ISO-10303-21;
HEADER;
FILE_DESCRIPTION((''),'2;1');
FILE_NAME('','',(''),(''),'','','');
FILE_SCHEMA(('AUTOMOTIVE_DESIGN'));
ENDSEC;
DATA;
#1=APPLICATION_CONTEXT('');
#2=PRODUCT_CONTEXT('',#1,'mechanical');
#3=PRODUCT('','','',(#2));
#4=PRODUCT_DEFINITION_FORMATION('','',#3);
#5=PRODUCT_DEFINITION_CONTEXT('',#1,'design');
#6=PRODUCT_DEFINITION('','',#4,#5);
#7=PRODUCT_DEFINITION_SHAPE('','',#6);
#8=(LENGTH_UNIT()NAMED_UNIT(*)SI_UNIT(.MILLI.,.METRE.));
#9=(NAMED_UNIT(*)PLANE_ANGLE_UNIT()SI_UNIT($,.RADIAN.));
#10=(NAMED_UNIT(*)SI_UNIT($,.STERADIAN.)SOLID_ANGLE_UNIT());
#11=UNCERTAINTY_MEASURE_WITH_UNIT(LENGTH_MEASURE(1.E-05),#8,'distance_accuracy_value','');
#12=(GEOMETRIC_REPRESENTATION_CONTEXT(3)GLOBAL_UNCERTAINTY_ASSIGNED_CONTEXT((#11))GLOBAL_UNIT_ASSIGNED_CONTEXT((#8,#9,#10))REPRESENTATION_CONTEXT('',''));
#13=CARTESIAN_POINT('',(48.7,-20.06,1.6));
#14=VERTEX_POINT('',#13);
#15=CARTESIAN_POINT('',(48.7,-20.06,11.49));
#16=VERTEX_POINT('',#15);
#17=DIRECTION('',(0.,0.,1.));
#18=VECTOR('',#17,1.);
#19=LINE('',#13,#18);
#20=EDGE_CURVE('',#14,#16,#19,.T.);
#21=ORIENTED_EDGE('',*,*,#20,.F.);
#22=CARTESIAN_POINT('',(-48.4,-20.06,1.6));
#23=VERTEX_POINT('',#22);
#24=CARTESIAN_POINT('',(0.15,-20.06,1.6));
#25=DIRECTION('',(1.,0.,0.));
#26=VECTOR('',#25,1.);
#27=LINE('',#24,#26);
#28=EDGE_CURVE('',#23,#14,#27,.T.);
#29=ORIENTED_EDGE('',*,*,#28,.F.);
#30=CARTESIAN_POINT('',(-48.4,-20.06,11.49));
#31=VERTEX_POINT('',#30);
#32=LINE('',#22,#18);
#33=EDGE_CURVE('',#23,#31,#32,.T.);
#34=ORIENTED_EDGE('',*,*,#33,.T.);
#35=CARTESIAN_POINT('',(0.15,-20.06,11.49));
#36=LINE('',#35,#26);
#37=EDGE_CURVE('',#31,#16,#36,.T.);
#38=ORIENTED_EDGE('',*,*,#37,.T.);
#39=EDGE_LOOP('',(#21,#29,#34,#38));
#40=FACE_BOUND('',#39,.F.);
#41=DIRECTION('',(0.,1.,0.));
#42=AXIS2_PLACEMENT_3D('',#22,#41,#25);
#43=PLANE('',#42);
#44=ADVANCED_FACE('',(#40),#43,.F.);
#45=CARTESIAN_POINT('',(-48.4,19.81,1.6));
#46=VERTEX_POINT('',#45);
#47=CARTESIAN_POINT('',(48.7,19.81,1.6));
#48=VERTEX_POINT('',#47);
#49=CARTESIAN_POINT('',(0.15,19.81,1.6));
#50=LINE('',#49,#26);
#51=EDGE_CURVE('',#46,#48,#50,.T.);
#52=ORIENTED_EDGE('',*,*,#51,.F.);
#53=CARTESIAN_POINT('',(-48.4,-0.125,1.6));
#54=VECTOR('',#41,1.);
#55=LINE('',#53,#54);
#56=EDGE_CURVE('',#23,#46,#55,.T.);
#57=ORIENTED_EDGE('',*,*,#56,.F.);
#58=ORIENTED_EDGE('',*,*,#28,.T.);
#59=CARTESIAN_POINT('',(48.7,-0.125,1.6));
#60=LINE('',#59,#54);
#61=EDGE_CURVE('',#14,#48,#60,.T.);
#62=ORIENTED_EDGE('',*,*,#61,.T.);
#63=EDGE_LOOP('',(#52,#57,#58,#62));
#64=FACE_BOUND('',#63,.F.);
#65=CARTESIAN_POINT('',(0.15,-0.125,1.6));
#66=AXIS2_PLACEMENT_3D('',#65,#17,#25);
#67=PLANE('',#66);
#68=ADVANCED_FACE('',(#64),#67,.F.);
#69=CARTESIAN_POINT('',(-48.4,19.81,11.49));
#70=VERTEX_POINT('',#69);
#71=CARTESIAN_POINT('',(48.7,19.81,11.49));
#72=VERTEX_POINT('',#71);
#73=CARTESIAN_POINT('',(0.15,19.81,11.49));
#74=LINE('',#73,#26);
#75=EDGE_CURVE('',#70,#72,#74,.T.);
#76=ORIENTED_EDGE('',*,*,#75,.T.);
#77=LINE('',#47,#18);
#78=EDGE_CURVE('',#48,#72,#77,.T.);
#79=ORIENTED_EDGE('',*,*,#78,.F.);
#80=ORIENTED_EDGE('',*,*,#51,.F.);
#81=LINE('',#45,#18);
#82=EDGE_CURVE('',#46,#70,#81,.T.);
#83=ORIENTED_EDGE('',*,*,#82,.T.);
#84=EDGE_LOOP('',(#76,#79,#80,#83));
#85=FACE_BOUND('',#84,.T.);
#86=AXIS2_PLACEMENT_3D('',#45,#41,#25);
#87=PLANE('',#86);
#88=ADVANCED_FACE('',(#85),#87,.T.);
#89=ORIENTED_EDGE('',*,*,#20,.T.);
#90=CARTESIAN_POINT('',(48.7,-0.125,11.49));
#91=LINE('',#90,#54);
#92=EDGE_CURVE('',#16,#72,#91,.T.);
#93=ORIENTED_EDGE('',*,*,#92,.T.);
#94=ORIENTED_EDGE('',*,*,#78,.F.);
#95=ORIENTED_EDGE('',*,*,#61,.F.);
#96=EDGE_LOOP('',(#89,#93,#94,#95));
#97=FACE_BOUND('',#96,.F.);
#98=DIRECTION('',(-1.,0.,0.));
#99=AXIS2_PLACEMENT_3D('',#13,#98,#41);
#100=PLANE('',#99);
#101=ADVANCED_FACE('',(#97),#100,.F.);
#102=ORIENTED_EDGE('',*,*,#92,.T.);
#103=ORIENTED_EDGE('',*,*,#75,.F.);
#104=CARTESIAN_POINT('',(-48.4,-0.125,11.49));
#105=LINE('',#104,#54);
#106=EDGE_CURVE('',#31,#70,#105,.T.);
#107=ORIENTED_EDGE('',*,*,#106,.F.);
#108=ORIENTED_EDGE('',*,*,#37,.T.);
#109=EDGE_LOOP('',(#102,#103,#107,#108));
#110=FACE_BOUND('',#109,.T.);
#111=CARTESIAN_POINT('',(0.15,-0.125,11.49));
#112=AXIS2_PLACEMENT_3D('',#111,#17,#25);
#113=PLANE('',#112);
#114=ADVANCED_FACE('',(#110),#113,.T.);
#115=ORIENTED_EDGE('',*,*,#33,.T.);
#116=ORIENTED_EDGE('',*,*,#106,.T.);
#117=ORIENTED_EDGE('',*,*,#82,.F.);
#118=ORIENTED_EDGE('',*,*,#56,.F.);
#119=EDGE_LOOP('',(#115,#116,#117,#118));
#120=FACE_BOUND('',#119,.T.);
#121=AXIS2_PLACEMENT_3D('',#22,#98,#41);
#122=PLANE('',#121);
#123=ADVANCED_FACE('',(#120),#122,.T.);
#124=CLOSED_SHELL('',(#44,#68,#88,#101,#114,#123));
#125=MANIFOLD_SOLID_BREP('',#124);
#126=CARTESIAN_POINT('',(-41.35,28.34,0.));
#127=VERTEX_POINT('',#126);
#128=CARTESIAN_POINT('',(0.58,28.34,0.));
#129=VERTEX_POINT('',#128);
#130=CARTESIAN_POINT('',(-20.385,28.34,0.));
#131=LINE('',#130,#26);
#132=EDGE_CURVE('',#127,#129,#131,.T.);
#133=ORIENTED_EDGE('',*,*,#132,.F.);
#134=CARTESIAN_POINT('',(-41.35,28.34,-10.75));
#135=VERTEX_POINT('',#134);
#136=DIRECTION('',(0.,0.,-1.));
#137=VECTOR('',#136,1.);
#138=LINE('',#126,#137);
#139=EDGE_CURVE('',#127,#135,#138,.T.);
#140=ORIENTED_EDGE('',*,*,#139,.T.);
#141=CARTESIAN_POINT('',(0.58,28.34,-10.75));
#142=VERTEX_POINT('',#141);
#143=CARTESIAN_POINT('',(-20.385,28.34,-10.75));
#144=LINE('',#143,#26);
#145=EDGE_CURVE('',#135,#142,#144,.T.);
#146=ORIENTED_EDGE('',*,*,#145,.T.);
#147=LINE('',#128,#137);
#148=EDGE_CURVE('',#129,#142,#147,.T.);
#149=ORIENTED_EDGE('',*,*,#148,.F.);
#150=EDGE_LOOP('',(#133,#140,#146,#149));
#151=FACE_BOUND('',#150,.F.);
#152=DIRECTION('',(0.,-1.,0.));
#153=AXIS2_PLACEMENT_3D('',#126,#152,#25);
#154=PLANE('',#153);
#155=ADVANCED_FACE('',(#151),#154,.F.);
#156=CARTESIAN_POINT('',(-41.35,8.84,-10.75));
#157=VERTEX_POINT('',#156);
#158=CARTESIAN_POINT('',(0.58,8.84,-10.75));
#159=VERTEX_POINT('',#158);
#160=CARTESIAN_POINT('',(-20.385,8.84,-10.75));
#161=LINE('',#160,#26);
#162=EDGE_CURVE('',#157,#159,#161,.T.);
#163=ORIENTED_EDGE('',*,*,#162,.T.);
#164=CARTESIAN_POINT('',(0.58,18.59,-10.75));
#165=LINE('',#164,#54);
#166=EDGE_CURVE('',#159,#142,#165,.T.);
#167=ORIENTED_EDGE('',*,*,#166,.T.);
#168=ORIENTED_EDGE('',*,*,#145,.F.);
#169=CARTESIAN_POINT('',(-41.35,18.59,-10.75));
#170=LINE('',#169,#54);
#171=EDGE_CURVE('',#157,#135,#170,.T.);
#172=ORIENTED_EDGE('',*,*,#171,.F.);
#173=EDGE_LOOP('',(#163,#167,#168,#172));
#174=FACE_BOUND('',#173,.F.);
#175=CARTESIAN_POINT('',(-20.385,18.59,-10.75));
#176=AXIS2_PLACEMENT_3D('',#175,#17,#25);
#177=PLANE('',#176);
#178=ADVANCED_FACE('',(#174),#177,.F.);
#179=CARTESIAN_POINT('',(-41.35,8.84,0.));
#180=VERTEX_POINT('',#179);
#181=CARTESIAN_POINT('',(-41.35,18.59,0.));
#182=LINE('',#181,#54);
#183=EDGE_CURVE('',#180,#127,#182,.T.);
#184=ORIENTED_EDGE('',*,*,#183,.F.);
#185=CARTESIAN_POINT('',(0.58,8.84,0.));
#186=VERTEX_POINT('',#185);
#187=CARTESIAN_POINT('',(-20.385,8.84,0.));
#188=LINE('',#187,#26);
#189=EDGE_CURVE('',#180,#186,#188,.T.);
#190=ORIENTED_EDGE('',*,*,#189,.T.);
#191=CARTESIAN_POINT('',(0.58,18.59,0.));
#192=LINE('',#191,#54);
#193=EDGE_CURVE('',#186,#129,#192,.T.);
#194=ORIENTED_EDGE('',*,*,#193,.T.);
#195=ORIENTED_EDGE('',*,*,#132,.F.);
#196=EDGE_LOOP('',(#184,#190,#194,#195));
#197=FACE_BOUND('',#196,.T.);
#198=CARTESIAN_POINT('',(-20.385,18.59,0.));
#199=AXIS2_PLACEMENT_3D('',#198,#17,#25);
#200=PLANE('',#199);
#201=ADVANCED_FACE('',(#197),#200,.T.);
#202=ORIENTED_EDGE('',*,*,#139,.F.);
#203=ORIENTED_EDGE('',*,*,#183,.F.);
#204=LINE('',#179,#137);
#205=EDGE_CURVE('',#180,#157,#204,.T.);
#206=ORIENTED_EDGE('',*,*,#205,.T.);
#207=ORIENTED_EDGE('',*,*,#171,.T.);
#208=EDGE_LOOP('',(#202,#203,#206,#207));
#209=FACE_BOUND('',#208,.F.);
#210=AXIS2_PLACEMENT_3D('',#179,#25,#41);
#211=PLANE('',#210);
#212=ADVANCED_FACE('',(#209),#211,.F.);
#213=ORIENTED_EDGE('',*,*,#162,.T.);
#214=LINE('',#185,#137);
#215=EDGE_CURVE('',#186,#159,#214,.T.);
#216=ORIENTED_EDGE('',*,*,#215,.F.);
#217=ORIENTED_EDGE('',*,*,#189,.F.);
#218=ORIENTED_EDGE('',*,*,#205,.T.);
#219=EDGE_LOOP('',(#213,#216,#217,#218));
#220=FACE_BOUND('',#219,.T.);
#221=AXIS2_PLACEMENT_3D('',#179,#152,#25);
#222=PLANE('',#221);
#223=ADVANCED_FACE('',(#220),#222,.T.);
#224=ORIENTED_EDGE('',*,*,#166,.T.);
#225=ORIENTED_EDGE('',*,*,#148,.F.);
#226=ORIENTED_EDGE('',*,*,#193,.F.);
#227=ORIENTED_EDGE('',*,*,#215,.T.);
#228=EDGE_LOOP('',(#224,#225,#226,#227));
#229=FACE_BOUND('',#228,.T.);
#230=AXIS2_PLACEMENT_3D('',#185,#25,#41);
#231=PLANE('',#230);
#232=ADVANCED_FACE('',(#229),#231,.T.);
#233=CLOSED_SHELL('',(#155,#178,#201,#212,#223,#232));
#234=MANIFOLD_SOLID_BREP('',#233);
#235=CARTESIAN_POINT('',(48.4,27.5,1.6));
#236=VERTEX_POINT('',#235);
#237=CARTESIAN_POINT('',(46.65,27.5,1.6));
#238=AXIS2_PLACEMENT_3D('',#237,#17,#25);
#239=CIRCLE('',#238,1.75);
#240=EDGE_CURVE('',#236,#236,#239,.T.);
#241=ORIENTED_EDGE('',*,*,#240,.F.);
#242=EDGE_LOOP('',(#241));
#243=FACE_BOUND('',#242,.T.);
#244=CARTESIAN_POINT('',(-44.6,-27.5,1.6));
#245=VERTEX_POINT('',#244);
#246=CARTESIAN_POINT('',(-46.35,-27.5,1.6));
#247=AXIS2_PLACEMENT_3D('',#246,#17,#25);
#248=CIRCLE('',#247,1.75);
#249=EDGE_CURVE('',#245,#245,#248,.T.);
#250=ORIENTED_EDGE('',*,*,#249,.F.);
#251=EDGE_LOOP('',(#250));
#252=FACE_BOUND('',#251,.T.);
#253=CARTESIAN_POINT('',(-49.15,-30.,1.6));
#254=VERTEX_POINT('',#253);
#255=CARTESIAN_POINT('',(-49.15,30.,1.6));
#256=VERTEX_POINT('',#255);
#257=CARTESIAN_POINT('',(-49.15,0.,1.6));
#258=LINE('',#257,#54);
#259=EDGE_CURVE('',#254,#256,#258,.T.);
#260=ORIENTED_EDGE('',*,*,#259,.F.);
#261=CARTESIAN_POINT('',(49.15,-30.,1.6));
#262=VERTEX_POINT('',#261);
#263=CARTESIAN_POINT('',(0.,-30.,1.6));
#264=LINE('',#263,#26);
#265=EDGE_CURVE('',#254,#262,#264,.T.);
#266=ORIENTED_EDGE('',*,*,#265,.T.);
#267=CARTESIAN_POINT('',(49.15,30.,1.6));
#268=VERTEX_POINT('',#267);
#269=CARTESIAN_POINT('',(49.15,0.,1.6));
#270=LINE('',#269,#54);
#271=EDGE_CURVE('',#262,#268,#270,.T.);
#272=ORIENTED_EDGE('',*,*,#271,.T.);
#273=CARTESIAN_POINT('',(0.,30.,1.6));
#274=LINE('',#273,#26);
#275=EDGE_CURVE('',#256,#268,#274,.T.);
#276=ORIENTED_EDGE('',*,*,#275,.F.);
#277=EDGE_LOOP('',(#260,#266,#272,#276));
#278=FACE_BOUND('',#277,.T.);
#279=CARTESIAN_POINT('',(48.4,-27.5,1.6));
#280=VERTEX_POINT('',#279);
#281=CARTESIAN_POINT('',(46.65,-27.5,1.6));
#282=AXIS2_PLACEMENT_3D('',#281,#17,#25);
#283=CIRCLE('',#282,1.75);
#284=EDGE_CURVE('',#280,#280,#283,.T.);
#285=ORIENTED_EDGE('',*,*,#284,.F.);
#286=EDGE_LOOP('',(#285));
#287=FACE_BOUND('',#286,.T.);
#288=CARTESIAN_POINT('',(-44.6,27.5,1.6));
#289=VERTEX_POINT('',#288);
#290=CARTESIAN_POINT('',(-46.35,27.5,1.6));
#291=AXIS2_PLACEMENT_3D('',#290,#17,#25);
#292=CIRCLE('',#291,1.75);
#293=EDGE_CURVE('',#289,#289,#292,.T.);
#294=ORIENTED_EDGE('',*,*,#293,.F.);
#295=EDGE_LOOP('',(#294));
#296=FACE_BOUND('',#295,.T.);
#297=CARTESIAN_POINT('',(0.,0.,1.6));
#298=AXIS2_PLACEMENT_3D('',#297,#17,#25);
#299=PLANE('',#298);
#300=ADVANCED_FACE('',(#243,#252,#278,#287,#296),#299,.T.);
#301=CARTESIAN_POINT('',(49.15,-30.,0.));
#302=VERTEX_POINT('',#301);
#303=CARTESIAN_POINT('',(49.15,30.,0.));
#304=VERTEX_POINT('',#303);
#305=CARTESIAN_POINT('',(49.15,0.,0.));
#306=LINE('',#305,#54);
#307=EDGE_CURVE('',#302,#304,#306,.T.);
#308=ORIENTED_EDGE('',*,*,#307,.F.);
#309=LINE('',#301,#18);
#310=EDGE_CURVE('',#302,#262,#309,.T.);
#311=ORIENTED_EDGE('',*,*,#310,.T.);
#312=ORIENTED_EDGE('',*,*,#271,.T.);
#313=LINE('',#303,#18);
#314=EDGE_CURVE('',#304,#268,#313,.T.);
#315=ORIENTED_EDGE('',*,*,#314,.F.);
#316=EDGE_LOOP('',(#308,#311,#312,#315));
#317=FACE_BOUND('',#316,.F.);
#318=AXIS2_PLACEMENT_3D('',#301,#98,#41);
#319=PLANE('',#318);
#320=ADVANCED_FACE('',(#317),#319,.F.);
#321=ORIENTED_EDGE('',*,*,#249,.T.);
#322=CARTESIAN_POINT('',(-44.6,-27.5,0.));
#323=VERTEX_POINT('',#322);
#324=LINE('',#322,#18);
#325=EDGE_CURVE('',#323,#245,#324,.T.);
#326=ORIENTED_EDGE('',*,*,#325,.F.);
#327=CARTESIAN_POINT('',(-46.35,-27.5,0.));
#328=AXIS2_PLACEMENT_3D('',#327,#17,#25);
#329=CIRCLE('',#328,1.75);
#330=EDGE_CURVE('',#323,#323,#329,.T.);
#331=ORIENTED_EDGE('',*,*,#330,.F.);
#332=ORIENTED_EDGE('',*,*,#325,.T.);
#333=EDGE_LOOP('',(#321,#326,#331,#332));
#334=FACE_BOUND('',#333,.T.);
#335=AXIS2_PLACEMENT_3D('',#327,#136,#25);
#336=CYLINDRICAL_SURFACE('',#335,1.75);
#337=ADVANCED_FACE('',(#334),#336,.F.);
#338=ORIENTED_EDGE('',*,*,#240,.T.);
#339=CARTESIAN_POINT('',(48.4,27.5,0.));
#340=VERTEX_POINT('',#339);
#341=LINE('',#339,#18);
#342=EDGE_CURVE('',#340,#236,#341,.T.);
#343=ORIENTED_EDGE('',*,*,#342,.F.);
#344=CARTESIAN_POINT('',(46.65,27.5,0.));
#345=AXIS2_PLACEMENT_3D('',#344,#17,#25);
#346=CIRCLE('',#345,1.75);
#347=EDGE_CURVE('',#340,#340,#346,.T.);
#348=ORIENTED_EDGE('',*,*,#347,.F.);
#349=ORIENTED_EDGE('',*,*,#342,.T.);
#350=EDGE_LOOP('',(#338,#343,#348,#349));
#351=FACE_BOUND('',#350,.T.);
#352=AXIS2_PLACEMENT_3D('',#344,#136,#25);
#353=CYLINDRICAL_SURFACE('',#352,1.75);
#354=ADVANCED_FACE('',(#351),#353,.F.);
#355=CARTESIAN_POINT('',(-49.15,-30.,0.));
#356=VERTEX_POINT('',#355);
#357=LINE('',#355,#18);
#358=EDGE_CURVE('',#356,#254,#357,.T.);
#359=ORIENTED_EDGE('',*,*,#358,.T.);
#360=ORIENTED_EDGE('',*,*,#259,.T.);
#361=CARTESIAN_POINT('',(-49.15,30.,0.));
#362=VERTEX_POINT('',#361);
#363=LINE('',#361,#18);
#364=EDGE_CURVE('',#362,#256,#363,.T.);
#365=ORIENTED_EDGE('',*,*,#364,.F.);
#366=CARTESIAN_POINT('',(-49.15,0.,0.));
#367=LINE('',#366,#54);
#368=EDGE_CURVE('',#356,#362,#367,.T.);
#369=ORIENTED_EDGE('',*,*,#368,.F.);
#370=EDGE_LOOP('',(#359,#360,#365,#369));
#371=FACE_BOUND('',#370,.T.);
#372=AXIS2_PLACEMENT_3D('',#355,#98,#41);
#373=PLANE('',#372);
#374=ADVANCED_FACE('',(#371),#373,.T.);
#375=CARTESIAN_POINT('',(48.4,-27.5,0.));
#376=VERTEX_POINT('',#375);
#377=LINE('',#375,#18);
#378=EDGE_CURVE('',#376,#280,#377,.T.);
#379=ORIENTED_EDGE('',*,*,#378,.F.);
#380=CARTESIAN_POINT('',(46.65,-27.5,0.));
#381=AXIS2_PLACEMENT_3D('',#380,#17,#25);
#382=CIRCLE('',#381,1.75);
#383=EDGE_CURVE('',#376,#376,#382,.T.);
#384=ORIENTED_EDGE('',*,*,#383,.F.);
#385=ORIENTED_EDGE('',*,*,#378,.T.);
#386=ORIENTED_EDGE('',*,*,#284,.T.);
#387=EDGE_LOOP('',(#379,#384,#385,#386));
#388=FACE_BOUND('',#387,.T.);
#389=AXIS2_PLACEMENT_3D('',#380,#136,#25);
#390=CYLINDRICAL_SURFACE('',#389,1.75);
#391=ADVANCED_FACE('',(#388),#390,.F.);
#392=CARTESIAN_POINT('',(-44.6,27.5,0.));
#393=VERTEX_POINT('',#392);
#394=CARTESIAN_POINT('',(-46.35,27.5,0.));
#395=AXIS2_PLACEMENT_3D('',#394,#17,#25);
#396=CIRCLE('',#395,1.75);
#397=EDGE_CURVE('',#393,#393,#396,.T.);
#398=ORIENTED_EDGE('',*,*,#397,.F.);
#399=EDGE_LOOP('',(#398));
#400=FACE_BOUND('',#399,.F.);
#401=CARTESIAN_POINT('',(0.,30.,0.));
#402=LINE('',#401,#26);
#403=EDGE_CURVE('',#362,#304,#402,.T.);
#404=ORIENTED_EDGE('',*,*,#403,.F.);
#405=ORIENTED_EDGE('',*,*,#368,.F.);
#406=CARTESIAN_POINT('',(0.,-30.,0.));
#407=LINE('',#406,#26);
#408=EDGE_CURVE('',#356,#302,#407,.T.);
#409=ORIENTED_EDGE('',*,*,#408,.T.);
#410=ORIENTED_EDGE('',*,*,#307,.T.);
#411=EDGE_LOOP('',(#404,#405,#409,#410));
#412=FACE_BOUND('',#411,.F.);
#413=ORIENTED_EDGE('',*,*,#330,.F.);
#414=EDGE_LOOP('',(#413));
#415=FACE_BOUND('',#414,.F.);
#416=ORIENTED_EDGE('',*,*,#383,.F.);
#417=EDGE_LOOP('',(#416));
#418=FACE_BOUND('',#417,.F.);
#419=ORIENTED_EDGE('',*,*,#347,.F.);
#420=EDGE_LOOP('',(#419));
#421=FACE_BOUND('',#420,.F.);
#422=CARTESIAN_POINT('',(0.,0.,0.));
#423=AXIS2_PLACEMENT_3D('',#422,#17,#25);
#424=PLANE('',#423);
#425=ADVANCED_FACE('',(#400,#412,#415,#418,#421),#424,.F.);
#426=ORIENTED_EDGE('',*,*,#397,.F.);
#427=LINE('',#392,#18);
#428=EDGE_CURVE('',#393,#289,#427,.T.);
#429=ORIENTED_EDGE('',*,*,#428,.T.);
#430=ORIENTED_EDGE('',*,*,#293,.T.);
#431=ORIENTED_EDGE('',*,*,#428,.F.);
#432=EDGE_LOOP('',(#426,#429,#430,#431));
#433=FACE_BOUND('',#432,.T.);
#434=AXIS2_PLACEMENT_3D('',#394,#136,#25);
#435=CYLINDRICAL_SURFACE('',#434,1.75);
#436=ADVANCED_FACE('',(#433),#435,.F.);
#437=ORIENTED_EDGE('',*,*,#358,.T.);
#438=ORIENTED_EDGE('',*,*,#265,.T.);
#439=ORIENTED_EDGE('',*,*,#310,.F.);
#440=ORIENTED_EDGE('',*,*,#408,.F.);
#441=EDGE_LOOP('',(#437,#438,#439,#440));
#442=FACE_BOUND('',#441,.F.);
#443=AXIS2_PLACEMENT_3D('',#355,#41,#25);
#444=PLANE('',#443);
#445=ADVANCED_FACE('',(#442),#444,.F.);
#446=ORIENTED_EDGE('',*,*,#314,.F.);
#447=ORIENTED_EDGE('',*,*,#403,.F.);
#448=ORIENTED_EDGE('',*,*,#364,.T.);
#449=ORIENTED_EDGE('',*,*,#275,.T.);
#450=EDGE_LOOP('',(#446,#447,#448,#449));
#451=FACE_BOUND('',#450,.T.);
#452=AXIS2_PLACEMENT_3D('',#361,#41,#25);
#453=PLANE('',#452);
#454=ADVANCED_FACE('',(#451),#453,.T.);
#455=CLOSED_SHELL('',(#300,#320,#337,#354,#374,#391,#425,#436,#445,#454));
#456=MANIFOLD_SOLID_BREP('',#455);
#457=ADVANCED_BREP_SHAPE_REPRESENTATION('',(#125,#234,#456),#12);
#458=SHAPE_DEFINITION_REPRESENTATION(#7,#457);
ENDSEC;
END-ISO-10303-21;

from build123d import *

# Parameters (mm, degrees)
F0_W     = 98.3
F0_H     = 60
F0_R     = 1.75
F1_DEPTH = 1.6
F2_W     = 97.1
F2_H     = 39.87
F3_DEPTH = 9.89
F4_W     = 41.93
F4_H     = 19.5
F5_DEPTH = 10.75


# Not quite as in the source:
# - a feature names something its author has since deleted; it is built from what else it names


with BuildPart() as f1:
    # F0 (on Top) → F1 (new body)
    with BuildSketch(Plane.XY):
        Rectangle(F0_W, F0_H)
        with Locations((-46.35, -27.5)):
            Circle(F0_R, mode=Mode.SUBTRACT)
        with Locations((46.65, -27.5)):
            Circle(F0_R, mode=Mode.SUBTRACT)
        with Locations((-46.35, 27.5)):
            Circle(F0_R, mode=Mode.SUBTRACT)
        with Locations((46.65, 27.5)):
            Circle(F0_R, mode=Mode.SUBTRACT)
    extrude(amount=F1_DEPTH)


with BuildPart() as f3:
    # F2 (on face) → F3 (new body)
    with BuildSketch(Plane.XY.offset(1.6)):
        with Locations((0.15, -0.125)):
            Rectangle(F2_W, F2_H)
    extrude(amount=F3_DEPTH)


with BuildPart() as f5:
    # F4 (on face) → F5 (new body)
    with BuildSketch(Plane.XY):
        with Locations((-20.385, 18.59)):
            Rectangle(F4_W, F4_H)
    extrude(amount=-F5_DEPTH)


solid = Compound([f1.part, f3.part, f5.part])
